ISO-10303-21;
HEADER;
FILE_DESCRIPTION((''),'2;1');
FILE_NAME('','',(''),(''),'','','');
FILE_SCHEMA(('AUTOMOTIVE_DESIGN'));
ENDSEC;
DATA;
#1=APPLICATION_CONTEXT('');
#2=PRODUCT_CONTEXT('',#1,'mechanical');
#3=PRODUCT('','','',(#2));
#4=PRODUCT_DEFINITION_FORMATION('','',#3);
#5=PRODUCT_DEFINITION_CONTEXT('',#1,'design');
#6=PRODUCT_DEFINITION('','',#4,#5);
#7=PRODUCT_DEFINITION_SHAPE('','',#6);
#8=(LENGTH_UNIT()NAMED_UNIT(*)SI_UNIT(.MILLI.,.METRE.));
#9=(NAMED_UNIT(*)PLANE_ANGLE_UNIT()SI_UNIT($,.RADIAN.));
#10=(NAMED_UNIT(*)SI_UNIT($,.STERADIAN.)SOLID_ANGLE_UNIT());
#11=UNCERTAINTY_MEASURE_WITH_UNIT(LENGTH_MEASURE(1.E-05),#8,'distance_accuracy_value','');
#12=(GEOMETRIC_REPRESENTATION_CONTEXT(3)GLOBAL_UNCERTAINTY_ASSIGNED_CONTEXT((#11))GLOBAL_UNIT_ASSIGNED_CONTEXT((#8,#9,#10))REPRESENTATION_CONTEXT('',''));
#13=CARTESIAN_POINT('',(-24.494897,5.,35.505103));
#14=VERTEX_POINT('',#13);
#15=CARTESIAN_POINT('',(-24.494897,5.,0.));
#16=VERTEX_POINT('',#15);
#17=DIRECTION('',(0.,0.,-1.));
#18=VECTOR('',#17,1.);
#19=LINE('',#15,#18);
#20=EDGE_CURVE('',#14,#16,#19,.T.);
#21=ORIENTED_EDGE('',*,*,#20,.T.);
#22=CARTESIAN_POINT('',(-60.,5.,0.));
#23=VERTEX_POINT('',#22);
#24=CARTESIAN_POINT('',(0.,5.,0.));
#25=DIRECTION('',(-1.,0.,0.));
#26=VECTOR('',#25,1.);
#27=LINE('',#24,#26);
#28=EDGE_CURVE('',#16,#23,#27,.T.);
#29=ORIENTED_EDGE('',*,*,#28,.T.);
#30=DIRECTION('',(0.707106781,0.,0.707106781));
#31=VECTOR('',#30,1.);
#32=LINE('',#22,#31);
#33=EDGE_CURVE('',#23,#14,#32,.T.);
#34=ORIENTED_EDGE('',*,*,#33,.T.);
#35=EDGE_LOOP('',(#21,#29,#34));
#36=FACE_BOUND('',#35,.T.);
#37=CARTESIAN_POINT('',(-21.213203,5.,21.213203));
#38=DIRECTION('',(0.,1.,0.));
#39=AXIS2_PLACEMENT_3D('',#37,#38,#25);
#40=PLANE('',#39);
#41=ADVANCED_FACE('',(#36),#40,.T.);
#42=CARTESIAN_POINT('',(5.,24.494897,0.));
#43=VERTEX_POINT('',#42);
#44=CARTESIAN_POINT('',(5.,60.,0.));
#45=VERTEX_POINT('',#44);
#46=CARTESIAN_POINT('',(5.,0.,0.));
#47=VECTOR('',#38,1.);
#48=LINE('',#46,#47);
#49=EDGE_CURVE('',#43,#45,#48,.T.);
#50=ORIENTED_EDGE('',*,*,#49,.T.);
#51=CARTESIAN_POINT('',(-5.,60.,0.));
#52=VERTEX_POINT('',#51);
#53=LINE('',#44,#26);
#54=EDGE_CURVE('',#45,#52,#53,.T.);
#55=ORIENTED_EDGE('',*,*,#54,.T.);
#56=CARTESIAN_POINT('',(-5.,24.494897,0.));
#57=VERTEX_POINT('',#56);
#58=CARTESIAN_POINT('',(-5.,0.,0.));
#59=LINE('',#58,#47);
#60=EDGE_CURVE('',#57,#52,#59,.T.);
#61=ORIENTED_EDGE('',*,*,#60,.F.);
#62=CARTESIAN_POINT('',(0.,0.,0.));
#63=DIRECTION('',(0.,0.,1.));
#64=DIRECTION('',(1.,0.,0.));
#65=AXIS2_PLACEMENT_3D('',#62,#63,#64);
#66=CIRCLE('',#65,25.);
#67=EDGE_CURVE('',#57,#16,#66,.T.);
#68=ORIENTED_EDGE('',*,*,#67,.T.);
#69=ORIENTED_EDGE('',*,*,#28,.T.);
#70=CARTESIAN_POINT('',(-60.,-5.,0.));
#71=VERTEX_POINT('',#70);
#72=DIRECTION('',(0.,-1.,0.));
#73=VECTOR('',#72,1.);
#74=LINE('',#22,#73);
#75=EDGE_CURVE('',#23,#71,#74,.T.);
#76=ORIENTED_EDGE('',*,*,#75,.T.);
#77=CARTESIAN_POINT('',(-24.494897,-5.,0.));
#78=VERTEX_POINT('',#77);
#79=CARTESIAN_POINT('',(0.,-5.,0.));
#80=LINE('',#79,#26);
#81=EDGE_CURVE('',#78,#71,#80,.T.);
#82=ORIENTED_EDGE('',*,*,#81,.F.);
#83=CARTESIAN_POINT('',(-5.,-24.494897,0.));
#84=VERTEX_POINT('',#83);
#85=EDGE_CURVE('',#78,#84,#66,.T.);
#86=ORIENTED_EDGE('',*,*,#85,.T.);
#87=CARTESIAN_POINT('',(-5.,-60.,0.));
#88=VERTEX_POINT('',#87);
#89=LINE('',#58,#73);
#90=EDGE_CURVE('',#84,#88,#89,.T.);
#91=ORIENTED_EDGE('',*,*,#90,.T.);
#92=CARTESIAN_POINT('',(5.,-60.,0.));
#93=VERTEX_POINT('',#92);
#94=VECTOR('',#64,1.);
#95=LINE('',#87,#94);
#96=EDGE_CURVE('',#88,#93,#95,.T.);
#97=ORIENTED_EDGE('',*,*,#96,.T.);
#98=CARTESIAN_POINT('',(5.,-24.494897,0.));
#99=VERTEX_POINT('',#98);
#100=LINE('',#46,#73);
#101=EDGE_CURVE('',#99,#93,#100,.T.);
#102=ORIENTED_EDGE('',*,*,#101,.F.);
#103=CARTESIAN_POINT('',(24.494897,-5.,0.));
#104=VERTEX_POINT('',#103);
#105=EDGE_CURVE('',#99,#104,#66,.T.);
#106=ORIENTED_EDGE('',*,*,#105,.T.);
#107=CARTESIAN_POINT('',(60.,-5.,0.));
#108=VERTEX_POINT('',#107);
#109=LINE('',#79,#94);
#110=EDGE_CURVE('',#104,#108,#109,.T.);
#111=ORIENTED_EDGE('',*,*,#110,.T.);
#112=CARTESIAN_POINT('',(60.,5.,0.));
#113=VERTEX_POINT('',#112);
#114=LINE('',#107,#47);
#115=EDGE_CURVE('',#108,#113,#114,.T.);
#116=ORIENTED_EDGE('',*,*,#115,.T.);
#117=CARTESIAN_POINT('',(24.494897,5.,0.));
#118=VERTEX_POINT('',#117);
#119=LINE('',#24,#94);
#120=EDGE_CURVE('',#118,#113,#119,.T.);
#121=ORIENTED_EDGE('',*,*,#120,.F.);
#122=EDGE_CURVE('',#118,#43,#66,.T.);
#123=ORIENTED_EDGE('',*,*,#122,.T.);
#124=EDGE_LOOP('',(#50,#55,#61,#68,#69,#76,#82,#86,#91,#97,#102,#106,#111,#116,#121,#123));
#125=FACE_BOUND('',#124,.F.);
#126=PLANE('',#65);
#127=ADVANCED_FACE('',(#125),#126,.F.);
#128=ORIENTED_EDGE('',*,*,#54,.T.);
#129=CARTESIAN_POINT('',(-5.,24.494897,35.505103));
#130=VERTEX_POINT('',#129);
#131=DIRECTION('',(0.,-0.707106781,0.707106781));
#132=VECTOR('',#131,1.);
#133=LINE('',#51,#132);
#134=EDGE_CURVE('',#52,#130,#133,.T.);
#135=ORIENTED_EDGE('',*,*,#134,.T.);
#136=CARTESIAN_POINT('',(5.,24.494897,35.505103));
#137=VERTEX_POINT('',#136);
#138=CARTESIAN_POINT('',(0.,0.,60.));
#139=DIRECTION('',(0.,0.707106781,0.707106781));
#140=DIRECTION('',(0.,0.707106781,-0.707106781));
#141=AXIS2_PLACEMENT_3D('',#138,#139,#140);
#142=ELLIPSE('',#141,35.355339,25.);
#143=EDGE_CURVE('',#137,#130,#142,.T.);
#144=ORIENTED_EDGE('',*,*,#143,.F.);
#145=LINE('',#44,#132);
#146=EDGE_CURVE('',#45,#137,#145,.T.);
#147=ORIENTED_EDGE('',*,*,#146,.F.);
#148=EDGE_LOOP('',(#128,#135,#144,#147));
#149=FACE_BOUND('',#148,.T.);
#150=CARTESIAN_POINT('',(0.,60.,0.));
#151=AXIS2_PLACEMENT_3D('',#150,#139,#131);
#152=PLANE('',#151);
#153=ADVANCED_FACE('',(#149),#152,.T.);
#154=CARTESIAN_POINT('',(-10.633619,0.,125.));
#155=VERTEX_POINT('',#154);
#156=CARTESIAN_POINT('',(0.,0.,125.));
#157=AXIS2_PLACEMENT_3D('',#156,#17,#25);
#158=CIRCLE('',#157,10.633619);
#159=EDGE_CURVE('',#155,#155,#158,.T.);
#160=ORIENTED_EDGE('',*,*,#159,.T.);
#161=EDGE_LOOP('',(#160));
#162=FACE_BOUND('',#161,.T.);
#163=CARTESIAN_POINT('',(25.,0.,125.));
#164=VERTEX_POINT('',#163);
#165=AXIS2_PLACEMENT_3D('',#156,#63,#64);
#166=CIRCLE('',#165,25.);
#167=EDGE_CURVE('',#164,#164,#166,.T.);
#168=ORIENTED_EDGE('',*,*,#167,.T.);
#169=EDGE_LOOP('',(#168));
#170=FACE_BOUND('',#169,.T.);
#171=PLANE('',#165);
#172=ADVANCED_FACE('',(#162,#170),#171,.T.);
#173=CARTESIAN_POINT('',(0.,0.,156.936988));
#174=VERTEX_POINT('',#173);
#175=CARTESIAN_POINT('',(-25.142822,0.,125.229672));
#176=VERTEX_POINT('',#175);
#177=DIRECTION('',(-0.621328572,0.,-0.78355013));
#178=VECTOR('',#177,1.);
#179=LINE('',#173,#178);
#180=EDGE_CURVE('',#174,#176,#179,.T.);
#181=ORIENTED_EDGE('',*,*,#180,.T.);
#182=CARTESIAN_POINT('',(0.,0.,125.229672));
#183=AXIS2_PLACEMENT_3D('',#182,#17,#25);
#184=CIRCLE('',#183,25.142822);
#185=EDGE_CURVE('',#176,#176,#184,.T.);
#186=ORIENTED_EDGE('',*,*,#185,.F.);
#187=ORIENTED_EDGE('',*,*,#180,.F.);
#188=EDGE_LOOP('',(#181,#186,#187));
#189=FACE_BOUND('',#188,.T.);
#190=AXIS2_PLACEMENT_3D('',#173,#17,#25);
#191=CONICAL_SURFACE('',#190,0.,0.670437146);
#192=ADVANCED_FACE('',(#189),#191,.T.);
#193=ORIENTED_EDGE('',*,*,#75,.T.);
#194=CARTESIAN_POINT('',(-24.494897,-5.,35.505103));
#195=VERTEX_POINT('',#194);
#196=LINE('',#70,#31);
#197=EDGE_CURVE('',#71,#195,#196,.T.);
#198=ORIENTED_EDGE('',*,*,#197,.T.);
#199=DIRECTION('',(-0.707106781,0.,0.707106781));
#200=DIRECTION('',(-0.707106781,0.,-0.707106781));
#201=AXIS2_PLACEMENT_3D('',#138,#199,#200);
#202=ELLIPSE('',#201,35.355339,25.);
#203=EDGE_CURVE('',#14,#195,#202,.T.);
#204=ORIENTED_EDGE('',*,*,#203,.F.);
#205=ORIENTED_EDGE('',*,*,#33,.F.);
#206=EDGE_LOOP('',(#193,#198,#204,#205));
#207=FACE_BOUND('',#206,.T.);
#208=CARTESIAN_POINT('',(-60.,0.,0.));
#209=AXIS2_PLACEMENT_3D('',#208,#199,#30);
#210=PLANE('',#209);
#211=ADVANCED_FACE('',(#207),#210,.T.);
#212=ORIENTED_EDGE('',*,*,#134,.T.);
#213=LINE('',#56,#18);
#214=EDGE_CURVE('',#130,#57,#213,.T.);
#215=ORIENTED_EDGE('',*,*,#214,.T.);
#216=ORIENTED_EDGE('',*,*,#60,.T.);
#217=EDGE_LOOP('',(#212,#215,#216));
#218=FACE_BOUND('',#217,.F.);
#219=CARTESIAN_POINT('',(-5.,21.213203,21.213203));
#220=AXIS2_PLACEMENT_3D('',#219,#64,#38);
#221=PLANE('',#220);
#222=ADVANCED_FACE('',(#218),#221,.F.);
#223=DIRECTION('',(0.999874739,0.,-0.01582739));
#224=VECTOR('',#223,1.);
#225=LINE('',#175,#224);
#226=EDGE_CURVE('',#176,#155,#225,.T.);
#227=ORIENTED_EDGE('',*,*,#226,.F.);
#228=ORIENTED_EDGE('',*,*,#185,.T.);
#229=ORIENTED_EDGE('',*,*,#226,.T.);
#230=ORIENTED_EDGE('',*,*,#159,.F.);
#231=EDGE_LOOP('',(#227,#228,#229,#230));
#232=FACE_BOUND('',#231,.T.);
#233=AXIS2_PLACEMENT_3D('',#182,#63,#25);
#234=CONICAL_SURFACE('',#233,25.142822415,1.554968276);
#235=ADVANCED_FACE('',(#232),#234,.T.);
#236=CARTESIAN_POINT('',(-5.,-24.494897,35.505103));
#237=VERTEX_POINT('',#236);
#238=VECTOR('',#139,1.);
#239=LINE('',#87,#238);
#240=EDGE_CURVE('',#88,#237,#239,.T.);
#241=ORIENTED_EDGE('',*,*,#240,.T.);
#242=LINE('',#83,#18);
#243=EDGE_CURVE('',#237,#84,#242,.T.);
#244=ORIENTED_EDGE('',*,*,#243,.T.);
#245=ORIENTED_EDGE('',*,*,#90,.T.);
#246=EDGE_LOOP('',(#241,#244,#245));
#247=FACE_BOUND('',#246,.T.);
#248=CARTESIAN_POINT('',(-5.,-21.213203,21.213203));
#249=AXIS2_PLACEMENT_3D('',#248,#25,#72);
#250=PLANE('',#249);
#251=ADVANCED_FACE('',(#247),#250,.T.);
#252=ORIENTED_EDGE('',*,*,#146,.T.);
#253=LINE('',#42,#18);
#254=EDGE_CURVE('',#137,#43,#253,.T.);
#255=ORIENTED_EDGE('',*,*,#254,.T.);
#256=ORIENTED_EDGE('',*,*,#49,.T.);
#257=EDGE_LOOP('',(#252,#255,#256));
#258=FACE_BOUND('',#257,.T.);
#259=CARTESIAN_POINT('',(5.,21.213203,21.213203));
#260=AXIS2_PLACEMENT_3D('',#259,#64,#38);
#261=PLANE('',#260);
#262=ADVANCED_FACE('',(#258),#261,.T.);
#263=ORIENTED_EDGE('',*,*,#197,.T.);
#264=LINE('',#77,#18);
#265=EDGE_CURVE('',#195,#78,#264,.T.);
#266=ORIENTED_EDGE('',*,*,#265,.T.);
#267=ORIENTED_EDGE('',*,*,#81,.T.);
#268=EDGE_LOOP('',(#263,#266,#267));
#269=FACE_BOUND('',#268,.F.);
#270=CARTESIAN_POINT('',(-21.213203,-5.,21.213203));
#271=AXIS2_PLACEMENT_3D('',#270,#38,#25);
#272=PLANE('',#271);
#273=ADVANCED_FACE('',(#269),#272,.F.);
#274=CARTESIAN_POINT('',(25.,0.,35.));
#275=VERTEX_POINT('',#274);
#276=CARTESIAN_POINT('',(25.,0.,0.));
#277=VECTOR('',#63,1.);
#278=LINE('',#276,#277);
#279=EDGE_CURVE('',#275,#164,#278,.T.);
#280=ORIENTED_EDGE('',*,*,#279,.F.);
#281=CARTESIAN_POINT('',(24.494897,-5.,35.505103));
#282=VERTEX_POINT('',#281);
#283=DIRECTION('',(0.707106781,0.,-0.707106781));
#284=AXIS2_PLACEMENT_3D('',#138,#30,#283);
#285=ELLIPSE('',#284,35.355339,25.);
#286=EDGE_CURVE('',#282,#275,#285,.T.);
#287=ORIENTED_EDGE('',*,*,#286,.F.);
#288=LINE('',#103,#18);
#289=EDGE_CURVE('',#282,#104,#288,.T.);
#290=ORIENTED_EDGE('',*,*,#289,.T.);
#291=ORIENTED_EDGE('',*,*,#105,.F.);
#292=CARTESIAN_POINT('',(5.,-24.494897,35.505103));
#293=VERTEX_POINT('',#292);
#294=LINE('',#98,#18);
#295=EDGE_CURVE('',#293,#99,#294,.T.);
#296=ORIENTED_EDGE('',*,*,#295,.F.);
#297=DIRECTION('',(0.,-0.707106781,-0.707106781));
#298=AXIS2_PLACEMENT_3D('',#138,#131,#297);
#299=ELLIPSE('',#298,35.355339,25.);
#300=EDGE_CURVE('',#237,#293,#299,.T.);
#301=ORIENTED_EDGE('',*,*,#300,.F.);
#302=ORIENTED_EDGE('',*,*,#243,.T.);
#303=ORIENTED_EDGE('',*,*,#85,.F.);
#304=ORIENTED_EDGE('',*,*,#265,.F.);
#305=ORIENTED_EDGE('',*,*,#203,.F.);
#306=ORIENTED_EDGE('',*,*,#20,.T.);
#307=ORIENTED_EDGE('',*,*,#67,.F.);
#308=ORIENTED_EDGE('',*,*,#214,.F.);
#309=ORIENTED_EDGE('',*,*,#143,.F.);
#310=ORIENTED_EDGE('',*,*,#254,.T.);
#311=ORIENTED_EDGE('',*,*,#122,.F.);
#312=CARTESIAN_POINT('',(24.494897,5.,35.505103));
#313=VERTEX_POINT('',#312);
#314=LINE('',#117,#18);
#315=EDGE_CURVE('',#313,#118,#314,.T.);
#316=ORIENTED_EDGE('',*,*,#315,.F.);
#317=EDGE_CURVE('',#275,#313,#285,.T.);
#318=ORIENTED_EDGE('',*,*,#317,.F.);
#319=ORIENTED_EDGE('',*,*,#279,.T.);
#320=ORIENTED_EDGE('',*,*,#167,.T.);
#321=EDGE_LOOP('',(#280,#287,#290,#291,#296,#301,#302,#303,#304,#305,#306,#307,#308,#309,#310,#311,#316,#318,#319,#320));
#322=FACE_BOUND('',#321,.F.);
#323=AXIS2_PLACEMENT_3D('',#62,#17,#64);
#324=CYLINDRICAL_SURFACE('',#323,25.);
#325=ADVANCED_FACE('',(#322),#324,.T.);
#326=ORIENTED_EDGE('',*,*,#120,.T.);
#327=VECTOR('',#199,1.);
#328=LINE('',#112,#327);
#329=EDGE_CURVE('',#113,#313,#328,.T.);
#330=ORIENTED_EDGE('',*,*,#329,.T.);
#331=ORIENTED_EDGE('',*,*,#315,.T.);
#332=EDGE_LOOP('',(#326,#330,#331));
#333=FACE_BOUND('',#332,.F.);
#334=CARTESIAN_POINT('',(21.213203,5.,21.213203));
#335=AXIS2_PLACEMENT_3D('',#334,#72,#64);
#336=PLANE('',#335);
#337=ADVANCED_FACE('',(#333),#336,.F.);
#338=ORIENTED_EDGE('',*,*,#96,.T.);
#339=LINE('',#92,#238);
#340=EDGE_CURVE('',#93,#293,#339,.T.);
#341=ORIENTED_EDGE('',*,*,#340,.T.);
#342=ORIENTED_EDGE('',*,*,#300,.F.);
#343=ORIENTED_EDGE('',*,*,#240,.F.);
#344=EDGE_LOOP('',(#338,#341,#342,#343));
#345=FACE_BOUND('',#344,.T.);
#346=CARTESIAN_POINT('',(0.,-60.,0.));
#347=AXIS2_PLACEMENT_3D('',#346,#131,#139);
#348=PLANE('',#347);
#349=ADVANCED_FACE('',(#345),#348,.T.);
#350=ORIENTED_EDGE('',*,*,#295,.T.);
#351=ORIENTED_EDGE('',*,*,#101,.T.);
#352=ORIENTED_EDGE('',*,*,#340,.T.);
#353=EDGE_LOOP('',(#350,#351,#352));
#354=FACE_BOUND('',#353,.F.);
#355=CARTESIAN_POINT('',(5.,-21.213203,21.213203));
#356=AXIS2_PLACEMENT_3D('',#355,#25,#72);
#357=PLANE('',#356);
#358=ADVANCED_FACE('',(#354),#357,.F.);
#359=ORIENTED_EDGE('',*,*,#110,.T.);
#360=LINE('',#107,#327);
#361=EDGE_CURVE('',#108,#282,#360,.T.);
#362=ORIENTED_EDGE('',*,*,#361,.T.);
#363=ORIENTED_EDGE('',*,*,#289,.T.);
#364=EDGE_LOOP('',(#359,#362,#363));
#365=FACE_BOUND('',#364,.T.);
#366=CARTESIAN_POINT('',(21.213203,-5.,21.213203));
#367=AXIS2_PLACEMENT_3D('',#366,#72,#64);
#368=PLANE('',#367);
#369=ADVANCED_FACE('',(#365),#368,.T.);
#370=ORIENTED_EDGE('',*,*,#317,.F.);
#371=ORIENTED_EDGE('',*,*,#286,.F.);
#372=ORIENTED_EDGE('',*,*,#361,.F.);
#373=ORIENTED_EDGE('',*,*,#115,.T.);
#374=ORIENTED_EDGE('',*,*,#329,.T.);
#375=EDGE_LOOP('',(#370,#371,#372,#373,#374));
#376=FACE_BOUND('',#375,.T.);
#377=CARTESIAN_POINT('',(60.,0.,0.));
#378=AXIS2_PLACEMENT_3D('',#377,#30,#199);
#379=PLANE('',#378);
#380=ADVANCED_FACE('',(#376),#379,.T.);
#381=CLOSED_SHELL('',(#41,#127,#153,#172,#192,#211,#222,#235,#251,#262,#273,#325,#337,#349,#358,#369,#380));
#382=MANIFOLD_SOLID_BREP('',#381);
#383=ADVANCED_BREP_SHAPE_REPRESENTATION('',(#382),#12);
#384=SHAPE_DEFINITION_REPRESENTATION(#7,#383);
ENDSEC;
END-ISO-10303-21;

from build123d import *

# Parameters (mm, degrees)
F0_R            = 25
F1_DEPTH        = 125
F3_DEPTH        = 5
F3_COPIES_COUNT = 4


# Not quite as in the source:
# - a pattern or mirror of a feature is missing from the dataset's text; its kind, count and spacing are read off the source's solid


with BuildPart() as f1:
    # F0 (on Top) → F1 (new body)
    with BuildSketch(Plane.XY):
        Circle(F0_R)
    extrude(amount=F1_DEPTH)

    # F2 (on Front) → F3 (join, symmetric)
    with BuildSketch(Plane.XZ):
        Polygon((0, 60), (0, 0), (60, 0), align=None)
    f3 = extrude(amount=F3_DEPTH, both=True)

    # F3_copies: F3 ×4 about axis
    f3_copies_axis = Axis((0, 0, 0), (0, 0, 1))
    for i in range(1, F3_COPIES_COUNT):
        add(f3.rotate(f3_copies_axis, i * 360 / F3_COPIES_COUNT))

    # F4 (on Front) → F5 (revolve)
    with BuildSketch(Plane.XZ):
        Polygon((0, 156.9369882345), (-25.1428224146, 125.2296715975), (0, 124.8316764832), align=None)
    revolve(axis=Axis((0, 0, 140.8843323588), (0, 0, -1)))


solid = f1.part
